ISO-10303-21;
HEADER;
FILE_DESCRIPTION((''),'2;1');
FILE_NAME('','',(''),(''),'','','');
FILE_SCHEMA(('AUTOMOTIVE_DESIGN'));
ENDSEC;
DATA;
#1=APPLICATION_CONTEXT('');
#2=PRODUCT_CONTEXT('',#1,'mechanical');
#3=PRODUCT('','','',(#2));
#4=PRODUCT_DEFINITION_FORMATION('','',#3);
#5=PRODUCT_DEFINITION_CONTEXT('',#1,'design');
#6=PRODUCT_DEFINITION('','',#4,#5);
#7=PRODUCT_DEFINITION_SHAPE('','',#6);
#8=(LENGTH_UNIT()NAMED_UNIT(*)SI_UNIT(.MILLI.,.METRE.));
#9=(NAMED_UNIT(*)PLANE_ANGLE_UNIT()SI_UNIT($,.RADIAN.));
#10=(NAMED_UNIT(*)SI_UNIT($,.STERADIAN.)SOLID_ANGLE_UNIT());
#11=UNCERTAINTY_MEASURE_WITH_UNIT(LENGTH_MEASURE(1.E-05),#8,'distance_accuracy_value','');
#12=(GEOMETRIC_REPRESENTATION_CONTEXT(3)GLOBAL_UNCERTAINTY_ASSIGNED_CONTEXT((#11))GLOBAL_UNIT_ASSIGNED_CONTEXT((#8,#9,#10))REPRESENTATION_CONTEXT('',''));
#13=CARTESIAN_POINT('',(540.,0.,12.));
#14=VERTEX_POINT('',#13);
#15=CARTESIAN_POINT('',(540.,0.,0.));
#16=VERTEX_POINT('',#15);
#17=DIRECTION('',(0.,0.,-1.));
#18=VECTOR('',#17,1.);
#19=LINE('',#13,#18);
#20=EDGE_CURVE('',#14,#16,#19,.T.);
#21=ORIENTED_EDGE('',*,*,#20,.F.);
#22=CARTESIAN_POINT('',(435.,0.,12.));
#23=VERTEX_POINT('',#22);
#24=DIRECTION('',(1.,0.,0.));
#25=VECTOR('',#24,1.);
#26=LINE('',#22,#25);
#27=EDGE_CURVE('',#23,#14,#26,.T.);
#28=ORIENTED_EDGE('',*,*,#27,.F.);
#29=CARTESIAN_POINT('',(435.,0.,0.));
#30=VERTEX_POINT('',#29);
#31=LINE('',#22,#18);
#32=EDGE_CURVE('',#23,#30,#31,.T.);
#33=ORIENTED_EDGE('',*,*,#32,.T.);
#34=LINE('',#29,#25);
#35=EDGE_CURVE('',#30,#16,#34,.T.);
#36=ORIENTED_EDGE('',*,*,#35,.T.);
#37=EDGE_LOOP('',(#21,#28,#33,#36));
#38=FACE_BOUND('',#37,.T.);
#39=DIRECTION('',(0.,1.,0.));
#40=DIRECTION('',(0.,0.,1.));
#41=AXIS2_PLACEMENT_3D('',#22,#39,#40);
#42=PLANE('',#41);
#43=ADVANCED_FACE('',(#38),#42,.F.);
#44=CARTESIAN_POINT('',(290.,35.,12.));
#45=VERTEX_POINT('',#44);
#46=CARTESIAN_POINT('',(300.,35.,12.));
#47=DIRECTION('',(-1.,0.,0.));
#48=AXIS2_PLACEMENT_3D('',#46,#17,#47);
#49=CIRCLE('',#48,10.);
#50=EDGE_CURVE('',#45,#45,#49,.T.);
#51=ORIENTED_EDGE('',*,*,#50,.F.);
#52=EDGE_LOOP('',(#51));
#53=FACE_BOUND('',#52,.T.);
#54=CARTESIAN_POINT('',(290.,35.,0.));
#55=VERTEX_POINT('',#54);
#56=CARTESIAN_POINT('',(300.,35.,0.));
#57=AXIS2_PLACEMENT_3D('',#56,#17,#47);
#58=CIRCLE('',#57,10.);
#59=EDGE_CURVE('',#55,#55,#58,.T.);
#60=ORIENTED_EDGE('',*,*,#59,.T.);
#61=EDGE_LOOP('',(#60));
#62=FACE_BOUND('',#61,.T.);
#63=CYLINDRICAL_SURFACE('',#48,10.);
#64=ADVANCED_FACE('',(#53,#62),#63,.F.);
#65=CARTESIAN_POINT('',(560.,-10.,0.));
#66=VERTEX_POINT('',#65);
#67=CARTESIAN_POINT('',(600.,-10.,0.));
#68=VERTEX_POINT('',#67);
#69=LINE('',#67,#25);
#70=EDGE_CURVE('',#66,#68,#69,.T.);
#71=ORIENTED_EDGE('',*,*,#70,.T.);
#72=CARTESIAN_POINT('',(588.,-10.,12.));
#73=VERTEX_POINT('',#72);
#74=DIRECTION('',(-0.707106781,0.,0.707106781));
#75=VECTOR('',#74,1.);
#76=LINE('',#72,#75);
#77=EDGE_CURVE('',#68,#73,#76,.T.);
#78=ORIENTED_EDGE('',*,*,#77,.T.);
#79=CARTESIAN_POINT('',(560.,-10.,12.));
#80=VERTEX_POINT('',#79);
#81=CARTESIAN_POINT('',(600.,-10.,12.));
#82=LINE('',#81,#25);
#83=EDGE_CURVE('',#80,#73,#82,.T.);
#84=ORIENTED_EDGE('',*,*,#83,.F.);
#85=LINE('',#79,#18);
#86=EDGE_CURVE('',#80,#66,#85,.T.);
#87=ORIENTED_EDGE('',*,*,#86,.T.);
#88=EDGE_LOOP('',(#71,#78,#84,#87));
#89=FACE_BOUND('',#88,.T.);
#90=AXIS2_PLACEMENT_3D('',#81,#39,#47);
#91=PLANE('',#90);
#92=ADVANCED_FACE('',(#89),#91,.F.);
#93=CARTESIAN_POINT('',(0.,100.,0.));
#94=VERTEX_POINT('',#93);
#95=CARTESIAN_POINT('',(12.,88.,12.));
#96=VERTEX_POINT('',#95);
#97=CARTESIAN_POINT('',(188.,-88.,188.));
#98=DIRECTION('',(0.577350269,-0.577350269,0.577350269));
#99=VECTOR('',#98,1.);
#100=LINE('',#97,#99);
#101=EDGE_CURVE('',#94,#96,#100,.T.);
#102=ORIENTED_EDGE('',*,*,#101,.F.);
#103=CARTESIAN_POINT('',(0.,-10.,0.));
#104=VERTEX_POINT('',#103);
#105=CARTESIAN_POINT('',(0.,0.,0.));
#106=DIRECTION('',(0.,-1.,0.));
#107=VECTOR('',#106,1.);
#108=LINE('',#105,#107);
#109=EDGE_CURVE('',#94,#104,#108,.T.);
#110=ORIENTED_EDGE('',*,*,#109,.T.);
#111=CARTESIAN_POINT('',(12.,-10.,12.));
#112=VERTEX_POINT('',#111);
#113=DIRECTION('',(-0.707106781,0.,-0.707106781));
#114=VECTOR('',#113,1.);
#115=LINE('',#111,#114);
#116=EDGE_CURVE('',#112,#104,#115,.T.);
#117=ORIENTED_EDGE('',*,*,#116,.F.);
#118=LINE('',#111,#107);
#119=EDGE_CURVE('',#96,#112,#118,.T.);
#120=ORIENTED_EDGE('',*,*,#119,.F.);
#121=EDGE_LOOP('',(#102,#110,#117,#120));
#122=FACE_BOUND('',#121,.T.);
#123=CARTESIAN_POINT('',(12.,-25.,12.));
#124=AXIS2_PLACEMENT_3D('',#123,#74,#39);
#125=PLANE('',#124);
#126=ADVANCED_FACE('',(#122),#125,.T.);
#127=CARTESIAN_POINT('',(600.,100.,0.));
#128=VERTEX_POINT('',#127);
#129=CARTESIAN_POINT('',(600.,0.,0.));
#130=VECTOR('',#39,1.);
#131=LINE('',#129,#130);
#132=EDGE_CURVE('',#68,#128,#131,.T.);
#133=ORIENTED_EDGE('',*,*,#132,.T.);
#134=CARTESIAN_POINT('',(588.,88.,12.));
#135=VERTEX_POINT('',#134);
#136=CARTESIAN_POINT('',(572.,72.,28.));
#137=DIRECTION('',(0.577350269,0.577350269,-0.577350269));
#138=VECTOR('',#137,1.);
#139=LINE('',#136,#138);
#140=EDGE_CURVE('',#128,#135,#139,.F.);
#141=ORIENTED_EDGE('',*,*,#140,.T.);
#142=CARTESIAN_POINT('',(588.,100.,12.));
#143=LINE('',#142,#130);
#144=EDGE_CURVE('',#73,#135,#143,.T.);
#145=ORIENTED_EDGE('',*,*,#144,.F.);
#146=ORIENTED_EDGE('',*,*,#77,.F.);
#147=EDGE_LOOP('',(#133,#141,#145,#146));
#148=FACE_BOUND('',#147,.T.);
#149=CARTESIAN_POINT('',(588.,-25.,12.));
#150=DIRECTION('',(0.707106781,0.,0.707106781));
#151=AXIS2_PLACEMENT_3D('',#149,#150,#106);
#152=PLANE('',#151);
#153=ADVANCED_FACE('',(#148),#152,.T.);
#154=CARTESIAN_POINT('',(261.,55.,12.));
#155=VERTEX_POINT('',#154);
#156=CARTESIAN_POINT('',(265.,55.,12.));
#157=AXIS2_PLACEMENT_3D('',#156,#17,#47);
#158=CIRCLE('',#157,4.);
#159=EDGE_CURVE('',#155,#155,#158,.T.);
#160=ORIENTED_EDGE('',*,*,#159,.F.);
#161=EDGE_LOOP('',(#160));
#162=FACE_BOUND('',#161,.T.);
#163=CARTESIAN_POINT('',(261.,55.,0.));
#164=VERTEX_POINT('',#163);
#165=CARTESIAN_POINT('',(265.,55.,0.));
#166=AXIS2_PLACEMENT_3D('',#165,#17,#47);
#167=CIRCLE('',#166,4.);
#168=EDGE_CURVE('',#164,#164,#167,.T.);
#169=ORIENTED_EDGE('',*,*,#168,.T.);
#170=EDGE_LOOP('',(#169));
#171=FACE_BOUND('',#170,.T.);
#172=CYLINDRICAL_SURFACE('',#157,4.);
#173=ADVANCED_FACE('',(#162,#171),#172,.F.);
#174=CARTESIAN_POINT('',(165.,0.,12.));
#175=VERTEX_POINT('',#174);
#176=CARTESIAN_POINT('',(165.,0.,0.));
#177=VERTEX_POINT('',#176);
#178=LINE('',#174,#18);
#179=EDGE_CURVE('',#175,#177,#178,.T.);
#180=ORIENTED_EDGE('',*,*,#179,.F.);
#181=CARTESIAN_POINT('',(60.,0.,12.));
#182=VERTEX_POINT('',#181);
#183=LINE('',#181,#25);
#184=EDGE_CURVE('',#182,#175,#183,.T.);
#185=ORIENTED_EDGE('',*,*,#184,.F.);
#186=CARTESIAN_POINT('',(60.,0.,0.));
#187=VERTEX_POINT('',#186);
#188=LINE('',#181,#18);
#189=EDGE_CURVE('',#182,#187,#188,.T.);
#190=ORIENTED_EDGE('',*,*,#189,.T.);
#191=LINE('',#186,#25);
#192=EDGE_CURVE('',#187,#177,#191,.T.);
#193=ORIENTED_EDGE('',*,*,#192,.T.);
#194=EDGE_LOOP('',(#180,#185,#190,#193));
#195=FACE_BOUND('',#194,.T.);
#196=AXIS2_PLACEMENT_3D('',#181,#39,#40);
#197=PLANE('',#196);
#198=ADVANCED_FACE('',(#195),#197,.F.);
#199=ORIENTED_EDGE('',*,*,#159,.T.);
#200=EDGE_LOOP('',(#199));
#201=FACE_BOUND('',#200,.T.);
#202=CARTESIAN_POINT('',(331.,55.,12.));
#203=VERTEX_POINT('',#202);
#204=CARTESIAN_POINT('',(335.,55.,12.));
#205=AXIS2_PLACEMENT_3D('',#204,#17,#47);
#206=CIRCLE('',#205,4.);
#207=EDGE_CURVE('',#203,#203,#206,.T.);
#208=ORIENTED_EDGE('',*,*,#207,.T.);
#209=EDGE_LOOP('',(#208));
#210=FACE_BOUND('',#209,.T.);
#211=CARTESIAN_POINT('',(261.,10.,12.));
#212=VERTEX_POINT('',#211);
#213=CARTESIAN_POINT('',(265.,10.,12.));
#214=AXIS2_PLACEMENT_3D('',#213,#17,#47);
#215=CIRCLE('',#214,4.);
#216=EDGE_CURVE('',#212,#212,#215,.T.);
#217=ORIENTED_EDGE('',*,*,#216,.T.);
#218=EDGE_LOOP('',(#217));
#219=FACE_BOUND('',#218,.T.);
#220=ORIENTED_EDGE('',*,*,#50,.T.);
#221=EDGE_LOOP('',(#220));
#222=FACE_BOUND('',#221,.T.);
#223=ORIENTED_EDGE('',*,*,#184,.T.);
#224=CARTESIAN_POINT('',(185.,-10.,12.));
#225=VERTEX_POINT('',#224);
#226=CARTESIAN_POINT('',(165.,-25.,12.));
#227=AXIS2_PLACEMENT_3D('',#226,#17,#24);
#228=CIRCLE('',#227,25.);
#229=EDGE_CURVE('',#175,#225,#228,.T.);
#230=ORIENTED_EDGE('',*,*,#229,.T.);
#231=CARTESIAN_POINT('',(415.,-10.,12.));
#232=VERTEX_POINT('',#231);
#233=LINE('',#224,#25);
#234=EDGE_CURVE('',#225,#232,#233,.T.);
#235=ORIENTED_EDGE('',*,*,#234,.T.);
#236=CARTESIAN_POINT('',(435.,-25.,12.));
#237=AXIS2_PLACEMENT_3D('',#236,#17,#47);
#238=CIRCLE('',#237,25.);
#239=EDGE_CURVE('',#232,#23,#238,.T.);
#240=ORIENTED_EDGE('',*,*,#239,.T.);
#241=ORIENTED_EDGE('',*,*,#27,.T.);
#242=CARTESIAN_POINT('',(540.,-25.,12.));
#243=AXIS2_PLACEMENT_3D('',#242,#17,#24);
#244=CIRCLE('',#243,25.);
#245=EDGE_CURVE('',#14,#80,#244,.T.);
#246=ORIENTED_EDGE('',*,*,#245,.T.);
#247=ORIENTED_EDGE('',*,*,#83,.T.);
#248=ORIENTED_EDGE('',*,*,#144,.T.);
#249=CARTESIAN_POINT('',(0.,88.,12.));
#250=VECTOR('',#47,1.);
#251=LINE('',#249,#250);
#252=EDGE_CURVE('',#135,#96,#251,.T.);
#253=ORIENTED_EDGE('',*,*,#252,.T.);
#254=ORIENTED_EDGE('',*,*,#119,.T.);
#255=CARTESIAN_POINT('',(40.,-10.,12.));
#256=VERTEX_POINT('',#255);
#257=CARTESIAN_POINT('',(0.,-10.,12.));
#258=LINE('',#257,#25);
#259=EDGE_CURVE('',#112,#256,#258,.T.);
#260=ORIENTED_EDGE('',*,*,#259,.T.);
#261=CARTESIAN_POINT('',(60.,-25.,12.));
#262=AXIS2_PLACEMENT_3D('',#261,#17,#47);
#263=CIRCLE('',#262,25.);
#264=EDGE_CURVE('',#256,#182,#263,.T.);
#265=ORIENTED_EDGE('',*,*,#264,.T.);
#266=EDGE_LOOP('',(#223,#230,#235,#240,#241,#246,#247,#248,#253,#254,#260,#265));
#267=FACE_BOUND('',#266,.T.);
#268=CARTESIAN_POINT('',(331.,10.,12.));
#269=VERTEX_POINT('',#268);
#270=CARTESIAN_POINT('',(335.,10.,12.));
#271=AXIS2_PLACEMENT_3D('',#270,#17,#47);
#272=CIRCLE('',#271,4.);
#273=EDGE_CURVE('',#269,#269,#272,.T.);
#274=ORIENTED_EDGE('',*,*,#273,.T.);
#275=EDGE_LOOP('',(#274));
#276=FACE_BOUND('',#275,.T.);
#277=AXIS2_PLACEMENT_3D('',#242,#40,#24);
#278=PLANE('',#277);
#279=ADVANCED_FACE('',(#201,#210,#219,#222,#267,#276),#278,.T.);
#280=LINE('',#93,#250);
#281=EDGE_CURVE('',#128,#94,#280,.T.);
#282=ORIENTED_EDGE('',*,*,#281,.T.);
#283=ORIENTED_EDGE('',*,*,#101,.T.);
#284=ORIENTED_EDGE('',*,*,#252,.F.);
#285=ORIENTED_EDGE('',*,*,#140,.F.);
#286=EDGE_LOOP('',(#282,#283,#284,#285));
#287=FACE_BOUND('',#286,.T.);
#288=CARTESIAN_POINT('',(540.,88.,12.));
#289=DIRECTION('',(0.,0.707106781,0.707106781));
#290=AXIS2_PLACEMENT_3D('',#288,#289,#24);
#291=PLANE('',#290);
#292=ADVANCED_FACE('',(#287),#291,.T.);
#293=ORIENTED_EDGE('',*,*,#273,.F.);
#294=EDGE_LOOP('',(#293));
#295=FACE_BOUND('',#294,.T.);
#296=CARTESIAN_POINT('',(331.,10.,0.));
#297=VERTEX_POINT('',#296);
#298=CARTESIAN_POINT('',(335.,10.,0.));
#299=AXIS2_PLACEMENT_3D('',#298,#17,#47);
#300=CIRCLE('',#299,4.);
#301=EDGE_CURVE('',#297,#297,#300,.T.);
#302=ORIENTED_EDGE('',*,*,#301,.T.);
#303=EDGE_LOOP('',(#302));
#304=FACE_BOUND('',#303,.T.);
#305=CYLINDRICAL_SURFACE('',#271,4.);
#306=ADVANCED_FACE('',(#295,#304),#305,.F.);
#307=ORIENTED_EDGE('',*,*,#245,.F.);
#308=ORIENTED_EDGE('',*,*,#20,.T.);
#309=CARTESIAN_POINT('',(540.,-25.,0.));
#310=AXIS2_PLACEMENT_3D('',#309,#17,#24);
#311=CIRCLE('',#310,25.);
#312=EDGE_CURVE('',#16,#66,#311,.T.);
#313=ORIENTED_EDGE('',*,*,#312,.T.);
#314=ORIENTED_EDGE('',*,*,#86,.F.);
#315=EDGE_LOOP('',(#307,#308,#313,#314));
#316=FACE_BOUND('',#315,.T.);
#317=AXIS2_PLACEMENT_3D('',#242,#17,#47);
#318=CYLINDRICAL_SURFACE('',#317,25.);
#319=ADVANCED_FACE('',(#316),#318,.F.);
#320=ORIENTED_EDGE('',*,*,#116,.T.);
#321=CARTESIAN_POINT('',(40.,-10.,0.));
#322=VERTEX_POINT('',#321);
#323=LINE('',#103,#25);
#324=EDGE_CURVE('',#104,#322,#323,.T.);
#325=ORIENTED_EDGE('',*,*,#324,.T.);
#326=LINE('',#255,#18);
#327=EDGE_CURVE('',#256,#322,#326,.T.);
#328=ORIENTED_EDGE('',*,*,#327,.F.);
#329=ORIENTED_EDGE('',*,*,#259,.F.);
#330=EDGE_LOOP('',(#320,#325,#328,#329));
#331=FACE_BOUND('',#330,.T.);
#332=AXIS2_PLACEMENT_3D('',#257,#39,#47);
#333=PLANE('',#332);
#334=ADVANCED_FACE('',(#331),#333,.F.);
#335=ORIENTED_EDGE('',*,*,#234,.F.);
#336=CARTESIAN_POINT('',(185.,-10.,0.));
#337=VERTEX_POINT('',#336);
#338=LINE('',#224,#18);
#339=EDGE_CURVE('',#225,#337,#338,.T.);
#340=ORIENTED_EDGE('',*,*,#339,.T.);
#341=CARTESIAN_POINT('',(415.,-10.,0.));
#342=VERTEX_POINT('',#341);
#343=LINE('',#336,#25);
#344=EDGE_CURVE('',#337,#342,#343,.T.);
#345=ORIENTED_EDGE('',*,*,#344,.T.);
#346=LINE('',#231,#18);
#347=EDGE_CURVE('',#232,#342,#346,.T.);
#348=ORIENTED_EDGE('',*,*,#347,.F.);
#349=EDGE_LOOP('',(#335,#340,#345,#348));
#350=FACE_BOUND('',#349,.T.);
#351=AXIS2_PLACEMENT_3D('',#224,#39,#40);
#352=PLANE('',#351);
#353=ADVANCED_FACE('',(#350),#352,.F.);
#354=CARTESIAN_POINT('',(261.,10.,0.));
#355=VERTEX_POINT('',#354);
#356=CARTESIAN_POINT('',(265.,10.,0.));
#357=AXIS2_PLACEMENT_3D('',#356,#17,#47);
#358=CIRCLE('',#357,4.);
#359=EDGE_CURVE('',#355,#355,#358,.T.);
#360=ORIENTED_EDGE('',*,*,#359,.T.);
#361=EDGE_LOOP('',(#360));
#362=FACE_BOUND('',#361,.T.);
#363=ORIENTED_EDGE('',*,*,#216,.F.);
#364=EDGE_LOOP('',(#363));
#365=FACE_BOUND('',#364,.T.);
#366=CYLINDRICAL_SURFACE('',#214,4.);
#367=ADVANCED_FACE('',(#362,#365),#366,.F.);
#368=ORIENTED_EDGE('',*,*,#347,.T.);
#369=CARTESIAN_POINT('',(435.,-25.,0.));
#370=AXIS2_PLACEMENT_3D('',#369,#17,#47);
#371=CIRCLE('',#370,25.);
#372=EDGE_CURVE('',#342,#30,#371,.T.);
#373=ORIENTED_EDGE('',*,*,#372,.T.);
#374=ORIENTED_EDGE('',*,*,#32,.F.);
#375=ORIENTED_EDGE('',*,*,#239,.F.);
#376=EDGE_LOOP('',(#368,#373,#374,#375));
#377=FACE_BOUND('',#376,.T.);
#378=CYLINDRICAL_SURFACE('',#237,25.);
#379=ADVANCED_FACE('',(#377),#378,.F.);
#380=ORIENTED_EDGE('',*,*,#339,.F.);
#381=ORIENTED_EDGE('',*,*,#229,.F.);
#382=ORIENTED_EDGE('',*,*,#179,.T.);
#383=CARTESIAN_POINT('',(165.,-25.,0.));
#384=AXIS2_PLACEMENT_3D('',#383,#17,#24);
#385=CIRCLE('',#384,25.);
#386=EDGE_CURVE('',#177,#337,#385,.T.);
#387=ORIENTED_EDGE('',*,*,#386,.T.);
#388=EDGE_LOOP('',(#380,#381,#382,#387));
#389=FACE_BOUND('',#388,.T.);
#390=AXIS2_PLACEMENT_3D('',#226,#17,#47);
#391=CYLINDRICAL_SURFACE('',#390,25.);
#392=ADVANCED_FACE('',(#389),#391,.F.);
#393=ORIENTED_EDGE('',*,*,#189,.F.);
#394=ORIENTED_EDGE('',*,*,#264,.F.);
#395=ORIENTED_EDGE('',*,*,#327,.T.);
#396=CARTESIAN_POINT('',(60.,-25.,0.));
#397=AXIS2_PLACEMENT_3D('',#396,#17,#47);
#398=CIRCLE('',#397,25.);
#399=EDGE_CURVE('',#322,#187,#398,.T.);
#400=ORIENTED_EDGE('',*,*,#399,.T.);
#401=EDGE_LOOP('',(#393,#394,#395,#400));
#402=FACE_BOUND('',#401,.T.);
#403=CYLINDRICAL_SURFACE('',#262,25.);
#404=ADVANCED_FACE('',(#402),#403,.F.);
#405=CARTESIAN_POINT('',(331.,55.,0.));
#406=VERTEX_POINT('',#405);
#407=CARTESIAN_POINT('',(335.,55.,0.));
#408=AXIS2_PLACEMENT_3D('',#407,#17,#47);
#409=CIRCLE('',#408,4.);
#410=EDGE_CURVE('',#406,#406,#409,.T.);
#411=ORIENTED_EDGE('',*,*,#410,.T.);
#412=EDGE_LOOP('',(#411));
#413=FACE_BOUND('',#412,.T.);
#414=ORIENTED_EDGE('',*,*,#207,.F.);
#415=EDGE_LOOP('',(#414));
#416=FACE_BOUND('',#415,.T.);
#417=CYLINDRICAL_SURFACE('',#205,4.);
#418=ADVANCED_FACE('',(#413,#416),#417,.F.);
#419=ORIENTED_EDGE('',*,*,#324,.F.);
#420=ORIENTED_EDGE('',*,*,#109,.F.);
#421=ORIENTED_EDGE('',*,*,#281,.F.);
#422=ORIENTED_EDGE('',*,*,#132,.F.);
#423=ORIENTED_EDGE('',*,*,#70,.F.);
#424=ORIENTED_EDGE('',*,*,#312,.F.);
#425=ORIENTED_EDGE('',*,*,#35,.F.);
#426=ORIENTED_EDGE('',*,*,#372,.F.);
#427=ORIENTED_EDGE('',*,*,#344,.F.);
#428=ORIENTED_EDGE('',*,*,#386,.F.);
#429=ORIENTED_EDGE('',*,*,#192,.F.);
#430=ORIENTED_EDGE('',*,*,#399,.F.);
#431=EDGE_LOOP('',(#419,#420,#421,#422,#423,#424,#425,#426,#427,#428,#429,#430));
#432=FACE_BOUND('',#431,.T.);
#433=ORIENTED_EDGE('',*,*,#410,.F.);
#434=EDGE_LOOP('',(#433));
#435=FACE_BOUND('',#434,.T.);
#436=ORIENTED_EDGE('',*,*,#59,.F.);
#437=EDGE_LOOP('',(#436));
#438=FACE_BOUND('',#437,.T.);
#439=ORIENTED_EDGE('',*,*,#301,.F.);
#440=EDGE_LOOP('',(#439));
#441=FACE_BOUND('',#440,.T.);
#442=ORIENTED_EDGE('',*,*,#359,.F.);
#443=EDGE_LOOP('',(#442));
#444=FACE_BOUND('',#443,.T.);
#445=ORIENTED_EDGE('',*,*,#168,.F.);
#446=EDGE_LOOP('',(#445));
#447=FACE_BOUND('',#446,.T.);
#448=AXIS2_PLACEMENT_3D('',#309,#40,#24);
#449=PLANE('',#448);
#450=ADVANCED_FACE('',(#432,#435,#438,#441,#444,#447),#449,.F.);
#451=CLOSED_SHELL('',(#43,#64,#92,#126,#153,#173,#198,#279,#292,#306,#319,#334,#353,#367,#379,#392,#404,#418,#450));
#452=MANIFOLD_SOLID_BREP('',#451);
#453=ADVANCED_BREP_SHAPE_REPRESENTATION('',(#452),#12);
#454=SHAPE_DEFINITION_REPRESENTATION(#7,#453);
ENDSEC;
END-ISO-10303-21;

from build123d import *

# Parameters (mm, degrees)
BOSS_EXTRUDE1_DEPTH = 12
CHAMFER1_SIZE       = 12
SKETCH2_R           = 4
SKETCH2_R_2         = 10
CUT_EXTRUDE1_DEPTH  = 609.394608786


with BuildPart() as part:
    # Sketch1 → Boss-Extrude1 (new body)
    with BuildSketch(Plane.XY):
        with BuildLine():
            Line((0, 0), (0, -10))
            Line((0, -10), (40, -10))
            ThreePointArc((40, -10), (48.819660113, -2.639320225), (60, 0))
            Line((60, 0), (165, 0))
            ThreePointArc((165, 0), (176.180339887, -2.639320225), (185, -10))
            Line((185, -10), (415, -10))
            ThreePointArc((415, -10), (423.819660113, -2.639320225), (435, 0))
            Line((435, 0), (540, 0))
            ThreePointArc((540, 0), (551.180339887, -2.639320225), (560, -10))
            Line((560, -10), (600, -10))
            Line((600, -10), (600, 0))
            Line((600, 0), (600, 100))
            Line((600, 100), (0, 100))
            Line((0, 100), (0, 0))
        make_face()
    extrude(amount=BOSS_EXTRUDE1_DEPTH)

    # Chamfer1
    chamfer1_edges = [part.edges().sort_by_distance(p)[0] for p in [
        (300, 100, 12),
        (600, 45, 12),
        (0, 45, 12),
    ]]
    chamfer(chamfer1_edges, length=CHAMFER1_SIZE - 0.0001)  # a hair under: the kernel refuses the full size

    # Sketch2 → Cut-Extrude1 (cut, through all)
    with BuildSketch(Plane(origin=(0, 0, 0), x_dir=(-1, 0, 0), z_dir=(0, 0, -1))):
        with Locations((-335, 55)):
            Circle(SKETCH2_R)
        with Locations((-300, 35)):
            Circle(SKETCH2_R_2)
        with Locations((-265, 55)):
            Circle(SKETCH2_R)
        with Locations((-335, 10)):
            Circle(SKETCH2_R)
        with Locations((-265, 10)):
            Circle(SKETCH2_R)
    extrude(amount=-CUT_EXTRUDE1_DEPTH, mode=Mode.SUBTRACT)


solid = part.part
